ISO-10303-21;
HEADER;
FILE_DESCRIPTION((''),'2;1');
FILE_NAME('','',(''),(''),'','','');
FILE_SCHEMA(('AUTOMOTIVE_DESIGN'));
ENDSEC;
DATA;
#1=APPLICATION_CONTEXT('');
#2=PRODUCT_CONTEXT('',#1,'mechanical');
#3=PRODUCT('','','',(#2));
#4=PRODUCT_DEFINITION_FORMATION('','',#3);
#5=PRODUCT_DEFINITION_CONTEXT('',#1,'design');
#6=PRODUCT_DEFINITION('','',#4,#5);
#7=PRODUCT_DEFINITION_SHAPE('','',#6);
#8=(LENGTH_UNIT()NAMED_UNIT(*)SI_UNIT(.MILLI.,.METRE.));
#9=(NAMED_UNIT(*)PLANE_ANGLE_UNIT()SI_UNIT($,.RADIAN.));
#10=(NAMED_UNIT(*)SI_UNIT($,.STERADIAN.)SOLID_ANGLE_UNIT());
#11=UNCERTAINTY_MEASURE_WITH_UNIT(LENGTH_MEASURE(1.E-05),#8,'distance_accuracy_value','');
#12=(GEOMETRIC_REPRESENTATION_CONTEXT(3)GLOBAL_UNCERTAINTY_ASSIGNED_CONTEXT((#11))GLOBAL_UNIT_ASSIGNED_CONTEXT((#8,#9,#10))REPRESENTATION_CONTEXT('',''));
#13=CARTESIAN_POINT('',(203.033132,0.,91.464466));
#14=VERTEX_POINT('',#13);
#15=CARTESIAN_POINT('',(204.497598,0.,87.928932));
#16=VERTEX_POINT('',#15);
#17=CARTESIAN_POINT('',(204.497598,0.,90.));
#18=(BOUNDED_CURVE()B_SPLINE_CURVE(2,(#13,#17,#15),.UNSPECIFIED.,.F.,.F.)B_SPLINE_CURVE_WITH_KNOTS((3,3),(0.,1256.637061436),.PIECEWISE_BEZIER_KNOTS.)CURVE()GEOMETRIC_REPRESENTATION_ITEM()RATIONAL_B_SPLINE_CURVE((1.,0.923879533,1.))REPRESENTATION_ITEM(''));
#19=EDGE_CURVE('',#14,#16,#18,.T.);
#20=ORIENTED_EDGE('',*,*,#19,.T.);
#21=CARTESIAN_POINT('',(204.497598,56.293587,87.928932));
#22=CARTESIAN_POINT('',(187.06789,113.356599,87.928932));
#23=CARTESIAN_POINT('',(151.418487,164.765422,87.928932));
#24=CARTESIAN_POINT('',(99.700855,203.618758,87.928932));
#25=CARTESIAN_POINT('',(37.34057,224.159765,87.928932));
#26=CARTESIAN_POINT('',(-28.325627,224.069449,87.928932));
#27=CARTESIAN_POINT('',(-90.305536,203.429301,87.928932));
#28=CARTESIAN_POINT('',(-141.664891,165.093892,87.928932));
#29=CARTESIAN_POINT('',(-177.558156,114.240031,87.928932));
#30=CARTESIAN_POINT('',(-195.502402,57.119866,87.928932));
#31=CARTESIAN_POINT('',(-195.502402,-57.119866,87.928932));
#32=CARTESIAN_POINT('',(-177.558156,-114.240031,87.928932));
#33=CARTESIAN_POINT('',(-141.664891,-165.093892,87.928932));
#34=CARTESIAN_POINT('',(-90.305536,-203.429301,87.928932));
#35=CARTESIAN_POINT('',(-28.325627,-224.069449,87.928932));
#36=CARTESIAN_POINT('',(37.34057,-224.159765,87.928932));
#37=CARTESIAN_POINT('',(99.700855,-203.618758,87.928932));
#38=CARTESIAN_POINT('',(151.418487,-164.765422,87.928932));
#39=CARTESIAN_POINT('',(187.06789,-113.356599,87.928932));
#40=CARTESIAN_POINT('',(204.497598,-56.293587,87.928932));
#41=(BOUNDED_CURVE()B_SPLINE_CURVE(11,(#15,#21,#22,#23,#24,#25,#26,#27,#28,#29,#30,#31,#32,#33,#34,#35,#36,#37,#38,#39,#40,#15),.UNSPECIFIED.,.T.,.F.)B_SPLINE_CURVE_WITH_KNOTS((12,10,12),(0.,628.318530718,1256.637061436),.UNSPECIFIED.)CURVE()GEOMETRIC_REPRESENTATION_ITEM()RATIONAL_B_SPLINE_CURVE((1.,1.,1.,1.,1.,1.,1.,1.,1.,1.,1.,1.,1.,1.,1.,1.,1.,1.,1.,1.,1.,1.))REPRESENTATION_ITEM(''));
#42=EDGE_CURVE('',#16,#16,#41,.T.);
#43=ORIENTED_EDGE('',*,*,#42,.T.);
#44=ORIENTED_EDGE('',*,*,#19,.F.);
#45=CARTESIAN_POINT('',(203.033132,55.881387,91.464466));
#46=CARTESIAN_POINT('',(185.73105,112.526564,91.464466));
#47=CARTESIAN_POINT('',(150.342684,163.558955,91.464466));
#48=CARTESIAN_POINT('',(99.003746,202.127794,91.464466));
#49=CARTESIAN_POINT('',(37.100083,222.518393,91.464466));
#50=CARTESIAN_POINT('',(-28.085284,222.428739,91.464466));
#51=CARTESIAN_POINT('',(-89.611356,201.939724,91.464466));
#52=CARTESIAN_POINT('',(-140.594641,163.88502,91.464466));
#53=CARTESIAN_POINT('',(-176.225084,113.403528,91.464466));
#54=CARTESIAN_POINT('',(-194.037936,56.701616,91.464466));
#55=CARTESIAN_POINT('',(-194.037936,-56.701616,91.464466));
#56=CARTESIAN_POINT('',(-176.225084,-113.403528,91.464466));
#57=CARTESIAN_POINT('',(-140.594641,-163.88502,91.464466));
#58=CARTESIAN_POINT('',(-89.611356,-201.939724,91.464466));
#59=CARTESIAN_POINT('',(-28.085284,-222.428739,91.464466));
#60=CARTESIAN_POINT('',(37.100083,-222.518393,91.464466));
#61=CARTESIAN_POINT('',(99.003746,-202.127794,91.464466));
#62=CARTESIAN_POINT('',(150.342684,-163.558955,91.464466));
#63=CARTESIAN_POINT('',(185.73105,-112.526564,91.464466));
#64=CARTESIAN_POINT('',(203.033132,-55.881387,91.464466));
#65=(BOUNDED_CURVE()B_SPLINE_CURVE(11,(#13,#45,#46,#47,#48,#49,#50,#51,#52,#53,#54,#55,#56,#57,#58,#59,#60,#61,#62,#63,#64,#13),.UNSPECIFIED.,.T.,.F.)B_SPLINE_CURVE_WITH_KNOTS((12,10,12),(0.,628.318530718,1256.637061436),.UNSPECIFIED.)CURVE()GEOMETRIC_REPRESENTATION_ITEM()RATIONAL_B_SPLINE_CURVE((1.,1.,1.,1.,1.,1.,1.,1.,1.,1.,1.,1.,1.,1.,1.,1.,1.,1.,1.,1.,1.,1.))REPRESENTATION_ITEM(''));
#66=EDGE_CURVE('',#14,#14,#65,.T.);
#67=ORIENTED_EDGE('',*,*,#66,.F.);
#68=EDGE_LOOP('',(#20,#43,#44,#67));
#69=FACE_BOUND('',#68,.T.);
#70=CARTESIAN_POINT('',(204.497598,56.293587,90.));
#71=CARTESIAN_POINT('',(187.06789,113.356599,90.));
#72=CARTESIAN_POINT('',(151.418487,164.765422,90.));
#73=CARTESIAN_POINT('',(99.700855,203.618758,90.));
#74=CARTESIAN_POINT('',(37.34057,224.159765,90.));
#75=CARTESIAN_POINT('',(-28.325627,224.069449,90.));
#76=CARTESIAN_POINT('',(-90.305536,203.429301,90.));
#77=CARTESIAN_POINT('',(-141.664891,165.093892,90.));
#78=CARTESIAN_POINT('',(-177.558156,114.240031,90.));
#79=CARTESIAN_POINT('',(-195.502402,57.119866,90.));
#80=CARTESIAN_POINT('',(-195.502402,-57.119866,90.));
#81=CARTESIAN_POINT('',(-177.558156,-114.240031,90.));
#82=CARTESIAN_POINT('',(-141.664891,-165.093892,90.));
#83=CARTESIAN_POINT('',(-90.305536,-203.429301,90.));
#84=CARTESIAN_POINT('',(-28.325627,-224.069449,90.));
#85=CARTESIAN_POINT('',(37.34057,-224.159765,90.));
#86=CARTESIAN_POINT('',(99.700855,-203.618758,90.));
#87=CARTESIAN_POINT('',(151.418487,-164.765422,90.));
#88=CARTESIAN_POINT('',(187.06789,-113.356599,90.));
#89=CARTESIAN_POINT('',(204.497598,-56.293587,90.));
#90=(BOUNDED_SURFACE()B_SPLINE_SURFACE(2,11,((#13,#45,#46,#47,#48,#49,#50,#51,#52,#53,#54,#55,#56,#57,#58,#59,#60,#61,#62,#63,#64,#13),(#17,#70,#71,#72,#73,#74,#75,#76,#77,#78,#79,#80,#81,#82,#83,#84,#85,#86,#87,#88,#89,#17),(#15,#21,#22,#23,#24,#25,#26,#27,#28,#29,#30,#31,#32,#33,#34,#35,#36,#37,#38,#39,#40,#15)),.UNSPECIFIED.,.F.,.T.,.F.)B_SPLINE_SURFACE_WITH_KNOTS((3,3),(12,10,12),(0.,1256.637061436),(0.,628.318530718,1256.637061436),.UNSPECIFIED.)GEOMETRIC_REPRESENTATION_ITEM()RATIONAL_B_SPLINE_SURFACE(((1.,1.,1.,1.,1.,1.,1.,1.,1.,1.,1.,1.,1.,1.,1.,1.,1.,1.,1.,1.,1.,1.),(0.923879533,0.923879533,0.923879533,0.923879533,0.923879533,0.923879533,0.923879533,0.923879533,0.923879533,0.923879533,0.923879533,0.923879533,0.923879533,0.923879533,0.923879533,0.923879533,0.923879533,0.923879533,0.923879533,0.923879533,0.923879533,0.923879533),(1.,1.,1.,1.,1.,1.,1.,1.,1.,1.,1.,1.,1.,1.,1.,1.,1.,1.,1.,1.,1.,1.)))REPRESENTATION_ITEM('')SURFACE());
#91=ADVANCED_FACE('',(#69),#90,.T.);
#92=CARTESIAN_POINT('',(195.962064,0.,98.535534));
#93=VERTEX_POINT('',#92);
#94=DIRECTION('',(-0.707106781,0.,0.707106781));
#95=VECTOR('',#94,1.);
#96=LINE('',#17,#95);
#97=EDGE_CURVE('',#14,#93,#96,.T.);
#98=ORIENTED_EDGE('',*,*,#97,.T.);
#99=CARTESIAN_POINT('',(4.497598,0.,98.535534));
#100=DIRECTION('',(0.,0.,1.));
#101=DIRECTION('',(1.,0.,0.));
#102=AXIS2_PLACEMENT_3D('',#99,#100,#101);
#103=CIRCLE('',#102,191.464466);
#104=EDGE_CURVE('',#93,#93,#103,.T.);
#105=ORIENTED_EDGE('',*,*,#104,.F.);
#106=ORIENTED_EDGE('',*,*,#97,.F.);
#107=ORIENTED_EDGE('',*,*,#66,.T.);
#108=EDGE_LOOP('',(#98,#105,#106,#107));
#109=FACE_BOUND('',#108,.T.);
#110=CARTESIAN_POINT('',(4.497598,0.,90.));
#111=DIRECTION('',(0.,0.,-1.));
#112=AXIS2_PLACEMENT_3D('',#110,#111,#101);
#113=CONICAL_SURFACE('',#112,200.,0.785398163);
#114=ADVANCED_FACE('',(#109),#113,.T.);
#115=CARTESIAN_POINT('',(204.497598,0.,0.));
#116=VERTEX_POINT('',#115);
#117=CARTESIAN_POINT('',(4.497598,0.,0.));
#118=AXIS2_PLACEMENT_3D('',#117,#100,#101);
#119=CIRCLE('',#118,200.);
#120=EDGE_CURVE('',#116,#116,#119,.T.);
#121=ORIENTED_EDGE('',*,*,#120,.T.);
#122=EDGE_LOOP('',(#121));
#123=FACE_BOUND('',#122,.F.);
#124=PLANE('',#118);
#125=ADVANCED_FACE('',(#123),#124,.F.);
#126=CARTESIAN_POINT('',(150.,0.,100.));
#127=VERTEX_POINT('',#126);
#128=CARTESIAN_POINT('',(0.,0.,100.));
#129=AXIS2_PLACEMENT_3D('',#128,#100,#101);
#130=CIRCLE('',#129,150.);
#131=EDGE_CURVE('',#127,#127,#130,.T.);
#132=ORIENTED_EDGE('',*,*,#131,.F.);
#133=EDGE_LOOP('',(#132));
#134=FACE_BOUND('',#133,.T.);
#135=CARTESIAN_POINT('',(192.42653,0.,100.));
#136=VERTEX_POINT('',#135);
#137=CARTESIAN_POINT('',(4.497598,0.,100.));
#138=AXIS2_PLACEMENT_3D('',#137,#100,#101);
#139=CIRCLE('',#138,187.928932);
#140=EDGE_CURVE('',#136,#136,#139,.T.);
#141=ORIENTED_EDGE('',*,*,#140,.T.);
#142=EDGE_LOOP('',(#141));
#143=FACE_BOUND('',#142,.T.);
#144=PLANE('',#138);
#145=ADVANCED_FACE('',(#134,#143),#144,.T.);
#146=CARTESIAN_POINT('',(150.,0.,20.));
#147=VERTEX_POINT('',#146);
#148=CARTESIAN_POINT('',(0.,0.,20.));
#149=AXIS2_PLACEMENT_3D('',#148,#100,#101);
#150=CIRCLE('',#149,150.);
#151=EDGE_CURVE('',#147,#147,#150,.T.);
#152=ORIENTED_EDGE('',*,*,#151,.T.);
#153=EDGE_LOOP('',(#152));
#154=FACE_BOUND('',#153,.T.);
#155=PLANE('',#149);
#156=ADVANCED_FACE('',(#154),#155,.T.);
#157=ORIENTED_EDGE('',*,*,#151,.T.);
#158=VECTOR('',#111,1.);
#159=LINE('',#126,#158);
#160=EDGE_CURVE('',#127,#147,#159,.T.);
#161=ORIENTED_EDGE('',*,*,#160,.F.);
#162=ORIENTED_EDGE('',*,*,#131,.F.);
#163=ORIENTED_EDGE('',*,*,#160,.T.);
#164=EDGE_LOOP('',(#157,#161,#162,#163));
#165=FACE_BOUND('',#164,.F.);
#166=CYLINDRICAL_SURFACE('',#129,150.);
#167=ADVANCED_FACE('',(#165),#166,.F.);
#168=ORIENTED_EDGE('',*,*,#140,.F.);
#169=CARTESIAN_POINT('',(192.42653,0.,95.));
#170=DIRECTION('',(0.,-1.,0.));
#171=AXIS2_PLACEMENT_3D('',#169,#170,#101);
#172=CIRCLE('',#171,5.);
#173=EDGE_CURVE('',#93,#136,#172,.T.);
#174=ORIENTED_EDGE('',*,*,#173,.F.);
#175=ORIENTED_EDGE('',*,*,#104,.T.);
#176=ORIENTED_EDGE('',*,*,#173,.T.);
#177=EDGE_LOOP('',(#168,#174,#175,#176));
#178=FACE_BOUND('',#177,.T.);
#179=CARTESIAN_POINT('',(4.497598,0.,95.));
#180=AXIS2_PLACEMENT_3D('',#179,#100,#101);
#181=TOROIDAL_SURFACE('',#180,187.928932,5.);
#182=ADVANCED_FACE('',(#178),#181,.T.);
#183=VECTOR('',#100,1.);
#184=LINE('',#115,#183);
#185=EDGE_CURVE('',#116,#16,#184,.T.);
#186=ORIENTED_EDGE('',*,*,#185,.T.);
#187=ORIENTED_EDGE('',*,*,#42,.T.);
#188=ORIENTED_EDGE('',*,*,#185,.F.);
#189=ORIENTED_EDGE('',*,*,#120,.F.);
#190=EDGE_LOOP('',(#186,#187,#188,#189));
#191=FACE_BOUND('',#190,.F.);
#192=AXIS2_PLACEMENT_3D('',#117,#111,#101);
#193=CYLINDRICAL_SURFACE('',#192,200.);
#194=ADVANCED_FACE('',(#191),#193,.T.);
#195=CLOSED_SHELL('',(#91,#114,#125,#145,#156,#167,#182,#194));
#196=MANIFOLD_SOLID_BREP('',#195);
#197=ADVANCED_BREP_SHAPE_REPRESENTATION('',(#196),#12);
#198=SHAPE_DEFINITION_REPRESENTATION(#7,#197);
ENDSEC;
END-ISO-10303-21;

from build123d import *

# Parameters (mm, degrees)
F0_R     = 200
F1_DEPTH = 100
F2_R     = 150
F3_DEPTH = 80
F4_SIZE  = 10
F5_R     = 5
F6_R     = 5


with BuildPart() as f1:
    # F0 (on Top) → F1 (new body)
    with BuildSketch(Plane.XY):
        with Locations((4.4975979886, 0)):
            Circle(F0_R)
    extrude(amount=F1_DEPTH)

    # F2 (on face) → F3 (cut)
    with BuildSketch(Plane.XY.offset(100)):
        Circle(F2_R)
    extrude(amount=-F3_DEPTH, mode=Mode.SUBTRACT)

    # F4
    f4_edges = [f1.edges().sort_by_distance(p)[0] for p in [
        (-195.502402, 0, 100),
    ]]
    chamfer(f4_edges, length=F4_SIZE)

    # F5
    f5_edges = [f1.edges().sort_by_distance(p)[0] for p in [
        (-185.502402, 0, 100),
    ]]
    fillet(f5_edges, radius=F5_R)

    # F6
    f6_edges = [f1.edges().sort_by_distance(p)[0] for p in [
        (-195.502402, 0, 90),
    ]]
    fillet(f6_edges, radius=F6_R)


solid = f1.part
